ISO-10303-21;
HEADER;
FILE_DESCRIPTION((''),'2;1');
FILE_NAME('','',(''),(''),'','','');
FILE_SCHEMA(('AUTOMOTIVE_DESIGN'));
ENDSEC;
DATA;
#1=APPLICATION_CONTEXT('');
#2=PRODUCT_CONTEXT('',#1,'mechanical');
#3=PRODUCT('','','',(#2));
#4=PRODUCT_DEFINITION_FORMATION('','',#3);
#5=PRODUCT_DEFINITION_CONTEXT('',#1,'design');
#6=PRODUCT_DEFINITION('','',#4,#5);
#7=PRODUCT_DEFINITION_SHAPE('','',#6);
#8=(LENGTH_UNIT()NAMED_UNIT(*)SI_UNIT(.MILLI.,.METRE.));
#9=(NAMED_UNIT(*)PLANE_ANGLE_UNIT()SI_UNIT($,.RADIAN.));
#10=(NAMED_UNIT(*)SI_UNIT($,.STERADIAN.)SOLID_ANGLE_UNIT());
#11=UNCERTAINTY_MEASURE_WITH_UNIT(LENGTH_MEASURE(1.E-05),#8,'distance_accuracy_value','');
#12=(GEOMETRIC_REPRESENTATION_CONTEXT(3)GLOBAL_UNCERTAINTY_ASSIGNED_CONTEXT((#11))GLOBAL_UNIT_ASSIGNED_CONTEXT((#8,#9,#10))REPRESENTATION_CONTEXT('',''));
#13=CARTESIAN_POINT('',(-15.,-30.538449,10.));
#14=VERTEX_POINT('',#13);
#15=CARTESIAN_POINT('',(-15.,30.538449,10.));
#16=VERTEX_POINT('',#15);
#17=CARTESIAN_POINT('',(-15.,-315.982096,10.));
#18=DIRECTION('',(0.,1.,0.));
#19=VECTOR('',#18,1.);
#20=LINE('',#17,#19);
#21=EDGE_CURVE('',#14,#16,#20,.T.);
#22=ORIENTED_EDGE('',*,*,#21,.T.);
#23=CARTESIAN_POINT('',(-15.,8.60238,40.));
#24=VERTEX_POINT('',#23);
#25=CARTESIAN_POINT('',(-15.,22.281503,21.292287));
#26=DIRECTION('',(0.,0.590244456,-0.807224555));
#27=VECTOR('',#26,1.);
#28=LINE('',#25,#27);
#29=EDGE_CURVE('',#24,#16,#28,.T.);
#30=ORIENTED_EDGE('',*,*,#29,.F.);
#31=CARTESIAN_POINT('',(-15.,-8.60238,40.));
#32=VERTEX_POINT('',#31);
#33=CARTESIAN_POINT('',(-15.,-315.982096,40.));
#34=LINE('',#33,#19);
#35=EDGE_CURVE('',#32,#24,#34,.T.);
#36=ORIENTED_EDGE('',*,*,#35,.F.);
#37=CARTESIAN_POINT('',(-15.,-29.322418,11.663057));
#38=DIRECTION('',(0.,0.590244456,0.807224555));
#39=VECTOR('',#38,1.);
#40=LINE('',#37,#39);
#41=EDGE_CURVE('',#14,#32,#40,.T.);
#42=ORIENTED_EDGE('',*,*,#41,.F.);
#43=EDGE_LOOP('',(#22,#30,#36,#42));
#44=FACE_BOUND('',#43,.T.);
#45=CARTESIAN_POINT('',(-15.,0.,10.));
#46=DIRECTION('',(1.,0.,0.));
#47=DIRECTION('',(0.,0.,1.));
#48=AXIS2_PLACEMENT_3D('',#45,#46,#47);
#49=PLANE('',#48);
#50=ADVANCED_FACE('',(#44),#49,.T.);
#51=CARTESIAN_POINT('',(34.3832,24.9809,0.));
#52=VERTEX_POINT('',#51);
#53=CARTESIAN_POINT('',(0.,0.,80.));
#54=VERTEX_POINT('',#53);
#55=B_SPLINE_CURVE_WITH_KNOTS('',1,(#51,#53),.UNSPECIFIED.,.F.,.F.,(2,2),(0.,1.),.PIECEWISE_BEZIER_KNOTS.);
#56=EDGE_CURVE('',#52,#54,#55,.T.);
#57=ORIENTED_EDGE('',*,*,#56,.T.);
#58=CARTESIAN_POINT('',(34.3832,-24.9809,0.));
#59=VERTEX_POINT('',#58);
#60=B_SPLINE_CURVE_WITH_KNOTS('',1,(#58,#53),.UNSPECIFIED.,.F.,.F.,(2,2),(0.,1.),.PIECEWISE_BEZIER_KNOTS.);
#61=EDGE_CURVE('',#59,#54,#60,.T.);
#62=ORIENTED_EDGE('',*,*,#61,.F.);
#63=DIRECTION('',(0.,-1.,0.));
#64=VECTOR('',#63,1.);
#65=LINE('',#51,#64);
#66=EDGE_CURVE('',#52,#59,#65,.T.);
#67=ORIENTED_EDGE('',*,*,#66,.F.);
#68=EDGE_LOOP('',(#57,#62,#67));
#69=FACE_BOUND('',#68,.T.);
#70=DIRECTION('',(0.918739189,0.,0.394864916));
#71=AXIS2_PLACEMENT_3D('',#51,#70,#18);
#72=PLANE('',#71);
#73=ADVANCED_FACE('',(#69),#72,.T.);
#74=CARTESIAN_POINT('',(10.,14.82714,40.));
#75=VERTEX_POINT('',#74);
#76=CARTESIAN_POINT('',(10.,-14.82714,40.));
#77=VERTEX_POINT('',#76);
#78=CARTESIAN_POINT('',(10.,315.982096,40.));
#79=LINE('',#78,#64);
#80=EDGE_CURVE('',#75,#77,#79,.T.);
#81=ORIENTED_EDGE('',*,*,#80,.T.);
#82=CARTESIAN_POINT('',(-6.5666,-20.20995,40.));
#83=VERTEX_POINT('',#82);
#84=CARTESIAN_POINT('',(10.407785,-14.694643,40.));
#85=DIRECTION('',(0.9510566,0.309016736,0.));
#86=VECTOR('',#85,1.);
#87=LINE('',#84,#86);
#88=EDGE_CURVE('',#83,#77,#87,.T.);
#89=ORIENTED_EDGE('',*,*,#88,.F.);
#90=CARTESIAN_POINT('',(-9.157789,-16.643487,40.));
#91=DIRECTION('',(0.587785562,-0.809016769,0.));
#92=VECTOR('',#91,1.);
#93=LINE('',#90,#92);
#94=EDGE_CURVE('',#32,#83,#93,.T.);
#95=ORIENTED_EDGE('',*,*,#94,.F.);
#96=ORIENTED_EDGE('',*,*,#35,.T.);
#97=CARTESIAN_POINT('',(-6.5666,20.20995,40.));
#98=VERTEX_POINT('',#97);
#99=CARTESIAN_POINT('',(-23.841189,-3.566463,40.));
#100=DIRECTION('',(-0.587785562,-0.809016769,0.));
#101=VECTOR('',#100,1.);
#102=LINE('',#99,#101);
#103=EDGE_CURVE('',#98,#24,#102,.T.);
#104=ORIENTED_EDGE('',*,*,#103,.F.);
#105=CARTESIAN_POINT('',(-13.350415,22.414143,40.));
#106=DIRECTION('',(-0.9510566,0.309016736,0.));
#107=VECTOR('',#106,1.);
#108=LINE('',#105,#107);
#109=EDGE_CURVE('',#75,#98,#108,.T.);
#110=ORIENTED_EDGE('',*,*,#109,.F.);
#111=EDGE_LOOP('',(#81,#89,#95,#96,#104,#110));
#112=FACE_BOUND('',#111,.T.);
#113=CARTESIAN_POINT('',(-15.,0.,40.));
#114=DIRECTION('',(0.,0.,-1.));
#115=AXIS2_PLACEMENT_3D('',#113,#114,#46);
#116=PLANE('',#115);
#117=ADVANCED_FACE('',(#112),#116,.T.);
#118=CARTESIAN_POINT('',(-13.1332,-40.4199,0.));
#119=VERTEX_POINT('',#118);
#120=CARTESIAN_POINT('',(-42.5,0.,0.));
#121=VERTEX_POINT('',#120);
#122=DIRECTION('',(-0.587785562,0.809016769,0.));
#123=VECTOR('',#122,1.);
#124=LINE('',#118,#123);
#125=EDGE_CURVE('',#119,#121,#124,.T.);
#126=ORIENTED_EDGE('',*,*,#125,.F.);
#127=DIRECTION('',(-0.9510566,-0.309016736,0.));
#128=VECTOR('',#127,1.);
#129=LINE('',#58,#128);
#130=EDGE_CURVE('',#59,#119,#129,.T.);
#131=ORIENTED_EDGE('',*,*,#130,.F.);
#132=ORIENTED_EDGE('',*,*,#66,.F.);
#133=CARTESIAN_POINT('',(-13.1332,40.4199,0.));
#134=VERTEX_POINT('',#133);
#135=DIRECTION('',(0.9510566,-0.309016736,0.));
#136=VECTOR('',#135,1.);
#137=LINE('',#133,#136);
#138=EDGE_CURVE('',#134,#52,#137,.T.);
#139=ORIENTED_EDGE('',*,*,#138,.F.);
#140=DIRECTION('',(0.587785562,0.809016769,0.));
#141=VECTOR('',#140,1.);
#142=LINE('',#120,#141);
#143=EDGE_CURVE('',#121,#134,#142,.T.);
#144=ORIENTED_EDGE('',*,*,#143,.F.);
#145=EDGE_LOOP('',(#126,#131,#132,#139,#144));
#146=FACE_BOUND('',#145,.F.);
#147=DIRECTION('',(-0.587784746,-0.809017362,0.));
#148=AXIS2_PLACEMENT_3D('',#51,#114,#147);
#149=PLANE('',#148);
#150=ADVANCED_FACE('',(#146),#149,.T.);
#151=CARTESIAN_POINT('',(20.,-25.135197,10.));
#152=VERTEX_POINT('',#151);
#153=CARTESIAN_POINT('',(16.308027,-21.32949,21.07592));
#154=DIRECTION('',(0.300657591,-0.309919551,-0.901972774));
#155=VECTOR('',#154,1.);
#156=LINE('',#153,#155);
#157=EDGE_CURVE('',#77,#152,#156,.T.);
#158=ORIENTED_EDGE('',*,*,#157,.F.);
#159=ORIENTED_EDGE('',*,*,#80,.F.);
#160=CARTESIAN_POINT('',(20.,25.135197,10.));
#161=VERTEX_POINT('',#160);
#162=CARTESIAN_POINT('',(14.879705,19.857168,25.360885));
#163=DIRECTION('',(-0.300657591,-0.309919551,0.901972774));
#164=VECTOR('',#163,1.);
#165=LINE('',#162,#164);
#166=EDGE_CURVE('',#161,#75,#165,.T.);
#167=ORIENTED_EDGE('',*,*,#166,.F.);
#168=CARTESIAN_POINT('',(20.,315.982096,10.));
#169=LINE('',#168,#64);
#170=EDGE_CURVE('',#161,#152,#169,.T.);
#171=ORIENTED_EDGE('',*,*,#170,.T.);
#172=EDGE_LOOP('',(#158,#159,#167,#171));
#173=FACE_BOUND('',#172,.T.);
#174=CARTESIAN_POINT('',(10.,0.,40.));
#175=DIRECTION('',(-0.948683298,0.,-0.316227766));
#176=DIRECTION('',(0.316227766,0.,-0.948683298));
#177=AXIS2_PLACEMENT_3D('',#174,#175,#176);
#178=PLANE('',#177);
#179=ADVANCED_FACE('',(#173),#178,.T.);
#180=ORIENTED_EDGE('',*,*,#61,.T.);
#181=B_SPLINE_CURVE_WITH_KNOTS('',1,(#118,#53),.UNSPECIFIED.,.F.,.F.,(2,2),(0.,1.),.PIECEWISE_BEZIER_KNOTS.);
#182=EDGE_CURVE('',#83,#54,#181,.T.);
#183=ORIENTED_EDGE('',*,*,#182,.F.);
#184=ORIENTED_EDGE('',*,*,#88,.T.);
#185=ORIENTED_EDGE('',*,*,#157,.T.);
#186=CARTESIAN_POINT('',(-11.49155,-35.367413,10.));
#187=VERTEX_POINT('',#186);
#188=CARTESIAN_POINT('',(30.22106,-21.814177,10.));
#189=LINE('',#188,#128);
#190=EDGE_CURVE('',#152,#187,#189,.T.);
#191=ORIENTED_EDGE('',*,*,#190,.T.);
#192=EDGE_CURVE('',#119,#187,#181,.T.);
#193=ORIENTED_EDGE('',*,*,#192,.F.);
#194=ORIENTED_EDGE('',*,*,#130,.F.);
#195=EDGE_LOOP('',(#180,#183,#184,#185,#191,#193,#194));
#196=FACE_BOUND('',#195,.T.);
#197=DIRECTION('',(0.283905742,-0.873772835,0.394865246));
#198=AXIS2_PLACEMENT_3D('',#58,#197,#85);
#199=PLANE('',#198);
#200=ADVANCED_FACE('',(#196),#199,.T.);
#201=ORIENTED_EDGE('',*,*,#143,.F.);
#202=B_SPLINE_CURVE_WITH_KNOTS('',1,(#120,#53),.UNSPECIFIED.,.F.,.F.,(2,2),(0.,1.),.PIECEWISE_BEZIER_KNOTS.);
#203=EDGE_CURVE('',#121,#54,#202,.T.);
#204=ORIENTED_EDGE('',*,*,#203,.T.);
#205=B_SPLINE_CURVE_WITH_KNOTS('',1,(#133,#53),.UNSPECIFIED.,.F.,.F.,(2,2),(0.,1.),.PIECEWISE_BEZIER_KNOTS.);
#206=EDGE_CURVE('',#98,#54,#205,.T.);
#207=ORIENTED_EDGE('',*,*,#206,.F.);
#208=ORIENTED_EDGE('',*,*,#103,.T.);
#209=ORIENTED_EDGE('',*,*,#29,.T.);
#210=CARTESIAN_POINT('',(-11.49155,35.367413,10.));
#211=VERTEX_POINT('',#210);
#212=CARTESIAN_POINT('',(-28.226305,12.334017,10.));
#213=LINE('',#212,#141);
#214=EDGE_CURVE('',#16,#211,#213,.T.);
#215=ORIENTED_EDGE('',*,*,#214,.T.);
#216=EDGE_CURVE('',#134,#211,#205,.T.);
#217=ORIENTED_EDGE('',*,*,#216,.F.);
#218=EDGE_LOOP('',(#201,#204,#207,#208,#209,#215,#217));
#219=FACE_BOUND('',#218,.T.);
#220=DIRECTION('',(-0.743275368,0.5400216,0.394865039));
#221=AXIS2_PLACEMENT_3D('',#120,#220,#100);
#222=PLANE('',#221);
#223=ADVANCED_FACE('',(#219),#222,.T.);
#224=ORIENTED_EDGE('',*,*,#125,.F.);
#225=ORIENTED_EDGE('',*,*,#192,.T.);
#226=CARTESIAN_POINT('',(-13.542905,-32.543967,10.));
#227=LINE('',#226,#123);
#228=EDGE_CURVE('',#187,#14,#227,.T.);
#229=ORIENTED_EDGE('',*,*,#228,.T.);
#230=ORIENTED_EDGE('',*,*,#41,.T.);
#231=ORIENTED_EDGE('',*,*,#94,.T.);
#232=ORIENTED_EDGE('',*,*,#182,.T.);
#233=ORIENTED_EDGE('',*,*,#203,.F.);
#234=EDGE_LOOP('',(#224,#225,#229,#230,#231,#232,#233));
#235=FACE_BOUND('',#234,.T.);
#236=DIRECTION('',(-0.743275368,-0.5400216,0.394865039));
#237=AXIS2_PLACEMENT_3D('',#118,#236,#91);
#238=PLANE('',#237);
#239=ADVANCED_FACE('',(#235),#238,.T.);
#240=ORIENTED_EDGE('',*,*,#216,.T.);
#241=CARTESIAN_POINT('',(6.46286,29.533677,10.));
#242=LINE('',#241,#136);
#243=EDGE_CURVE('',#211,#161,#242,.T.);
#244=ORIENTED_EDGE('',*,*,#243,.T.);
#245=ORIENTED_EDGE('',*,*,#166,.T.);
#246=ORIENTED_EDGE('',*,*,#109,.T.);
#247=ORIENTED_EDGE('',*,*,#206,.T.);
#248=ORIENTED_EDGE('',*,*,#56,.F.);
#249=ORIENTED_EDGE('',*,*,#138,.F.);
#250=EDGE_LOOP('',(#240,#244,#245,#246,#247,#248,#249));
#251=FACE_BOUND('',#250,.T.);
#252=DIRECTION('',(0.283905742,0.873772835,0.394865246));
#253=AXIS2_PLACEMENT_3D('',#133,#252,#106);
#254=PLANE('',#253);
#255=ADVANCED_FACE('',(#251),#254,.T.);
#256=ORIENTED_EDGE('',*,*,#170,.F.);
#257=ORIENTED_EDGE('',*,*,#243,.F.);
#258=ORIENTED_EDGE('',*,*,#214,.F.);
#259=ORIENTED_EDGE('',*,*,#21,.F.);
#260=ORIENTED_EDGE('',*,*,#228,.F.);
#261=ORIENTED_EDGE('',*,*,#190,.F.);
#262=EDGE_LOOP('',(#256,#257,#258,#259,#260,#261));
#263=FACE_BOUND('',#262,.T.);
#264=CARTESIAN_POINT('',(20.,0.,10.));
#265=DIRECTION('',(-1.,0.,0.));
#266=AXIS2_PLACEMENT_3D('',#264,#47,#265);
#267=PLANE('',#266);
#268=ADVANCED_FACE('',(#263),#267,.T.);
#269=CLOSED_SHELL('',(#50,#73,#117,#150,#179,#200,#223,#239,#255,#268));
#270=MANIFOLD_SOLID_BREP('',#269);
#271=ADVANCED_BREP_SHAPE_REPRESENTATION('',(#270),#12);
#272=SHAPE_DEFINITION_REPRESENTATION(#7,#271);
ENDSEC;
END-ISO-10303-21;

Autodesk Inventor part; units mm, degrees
ref_plane "YZ Plane" through (0, 0, 0) normal (1, 0, 0) x (0, 1, 0)
ref_plane "XZ Plane" through (0, 0, 0) normal (0, 1, 0) x (-1, 0, 0)
sketch "Эскиз1" plane through (0, 0, 0) normal (0, 0, 1) x (1, 0, 0)
  line L0 (34.3832, 24.9809) -> (34.3832, -24.9809)
  line L1 (34.3832, -24.9809) -> (-13.1332, -40.4199)
  line L2 (-13.1332, -40.4199) -> (-42.5, 0)
  line L3 (-42.5, 0) -> (-13.1332, 40.4199)
  line L4 (-13.1332, 40.4199) -> (34.3832, 24.9809)
  point P0 (0, 0)
  point P1 (0, 0)
  dimension "d2" = 76.8832
ref_plane "РабПлоскость1" through (0, 0, 80) normal (0, 0, 1) x (1, 0, 0)
sketch "Эскиз2" plane through (0, 0, 80) normal (0, 0, 1) x (1, 0, 0)
  point P0 (0, 0)
  point P1 (0, 0)
loft "Лофт1" add profiles "Эскиз1" section 2 point at (0, 0, 80)
sketch "Эскиз3" plane through (0, 0, 0) normal (0, 1, 0) x (-1, 0, 0)
  line L0 (15, 10) -> (15, 40)
  line L1 (15, 40) -> (-10, 40)
  line L2 (-10, 40) -> (-20, 10)
  line L3 (-20, 10) -> (15, 10)
  point P0 (0, 0)
  dimension "d10" = 35
  dimension "d11" = 25
  dimension "d12" = 30
  dimension "d13" = 15
  dimension "d14" = 10
extrude "Выдавливание1" cut sketch "Эскиз3" along normal through all both and the other way through all
properties part number "Пирамида Модель" material "Сталь, высокопрочная, низколегированная"
